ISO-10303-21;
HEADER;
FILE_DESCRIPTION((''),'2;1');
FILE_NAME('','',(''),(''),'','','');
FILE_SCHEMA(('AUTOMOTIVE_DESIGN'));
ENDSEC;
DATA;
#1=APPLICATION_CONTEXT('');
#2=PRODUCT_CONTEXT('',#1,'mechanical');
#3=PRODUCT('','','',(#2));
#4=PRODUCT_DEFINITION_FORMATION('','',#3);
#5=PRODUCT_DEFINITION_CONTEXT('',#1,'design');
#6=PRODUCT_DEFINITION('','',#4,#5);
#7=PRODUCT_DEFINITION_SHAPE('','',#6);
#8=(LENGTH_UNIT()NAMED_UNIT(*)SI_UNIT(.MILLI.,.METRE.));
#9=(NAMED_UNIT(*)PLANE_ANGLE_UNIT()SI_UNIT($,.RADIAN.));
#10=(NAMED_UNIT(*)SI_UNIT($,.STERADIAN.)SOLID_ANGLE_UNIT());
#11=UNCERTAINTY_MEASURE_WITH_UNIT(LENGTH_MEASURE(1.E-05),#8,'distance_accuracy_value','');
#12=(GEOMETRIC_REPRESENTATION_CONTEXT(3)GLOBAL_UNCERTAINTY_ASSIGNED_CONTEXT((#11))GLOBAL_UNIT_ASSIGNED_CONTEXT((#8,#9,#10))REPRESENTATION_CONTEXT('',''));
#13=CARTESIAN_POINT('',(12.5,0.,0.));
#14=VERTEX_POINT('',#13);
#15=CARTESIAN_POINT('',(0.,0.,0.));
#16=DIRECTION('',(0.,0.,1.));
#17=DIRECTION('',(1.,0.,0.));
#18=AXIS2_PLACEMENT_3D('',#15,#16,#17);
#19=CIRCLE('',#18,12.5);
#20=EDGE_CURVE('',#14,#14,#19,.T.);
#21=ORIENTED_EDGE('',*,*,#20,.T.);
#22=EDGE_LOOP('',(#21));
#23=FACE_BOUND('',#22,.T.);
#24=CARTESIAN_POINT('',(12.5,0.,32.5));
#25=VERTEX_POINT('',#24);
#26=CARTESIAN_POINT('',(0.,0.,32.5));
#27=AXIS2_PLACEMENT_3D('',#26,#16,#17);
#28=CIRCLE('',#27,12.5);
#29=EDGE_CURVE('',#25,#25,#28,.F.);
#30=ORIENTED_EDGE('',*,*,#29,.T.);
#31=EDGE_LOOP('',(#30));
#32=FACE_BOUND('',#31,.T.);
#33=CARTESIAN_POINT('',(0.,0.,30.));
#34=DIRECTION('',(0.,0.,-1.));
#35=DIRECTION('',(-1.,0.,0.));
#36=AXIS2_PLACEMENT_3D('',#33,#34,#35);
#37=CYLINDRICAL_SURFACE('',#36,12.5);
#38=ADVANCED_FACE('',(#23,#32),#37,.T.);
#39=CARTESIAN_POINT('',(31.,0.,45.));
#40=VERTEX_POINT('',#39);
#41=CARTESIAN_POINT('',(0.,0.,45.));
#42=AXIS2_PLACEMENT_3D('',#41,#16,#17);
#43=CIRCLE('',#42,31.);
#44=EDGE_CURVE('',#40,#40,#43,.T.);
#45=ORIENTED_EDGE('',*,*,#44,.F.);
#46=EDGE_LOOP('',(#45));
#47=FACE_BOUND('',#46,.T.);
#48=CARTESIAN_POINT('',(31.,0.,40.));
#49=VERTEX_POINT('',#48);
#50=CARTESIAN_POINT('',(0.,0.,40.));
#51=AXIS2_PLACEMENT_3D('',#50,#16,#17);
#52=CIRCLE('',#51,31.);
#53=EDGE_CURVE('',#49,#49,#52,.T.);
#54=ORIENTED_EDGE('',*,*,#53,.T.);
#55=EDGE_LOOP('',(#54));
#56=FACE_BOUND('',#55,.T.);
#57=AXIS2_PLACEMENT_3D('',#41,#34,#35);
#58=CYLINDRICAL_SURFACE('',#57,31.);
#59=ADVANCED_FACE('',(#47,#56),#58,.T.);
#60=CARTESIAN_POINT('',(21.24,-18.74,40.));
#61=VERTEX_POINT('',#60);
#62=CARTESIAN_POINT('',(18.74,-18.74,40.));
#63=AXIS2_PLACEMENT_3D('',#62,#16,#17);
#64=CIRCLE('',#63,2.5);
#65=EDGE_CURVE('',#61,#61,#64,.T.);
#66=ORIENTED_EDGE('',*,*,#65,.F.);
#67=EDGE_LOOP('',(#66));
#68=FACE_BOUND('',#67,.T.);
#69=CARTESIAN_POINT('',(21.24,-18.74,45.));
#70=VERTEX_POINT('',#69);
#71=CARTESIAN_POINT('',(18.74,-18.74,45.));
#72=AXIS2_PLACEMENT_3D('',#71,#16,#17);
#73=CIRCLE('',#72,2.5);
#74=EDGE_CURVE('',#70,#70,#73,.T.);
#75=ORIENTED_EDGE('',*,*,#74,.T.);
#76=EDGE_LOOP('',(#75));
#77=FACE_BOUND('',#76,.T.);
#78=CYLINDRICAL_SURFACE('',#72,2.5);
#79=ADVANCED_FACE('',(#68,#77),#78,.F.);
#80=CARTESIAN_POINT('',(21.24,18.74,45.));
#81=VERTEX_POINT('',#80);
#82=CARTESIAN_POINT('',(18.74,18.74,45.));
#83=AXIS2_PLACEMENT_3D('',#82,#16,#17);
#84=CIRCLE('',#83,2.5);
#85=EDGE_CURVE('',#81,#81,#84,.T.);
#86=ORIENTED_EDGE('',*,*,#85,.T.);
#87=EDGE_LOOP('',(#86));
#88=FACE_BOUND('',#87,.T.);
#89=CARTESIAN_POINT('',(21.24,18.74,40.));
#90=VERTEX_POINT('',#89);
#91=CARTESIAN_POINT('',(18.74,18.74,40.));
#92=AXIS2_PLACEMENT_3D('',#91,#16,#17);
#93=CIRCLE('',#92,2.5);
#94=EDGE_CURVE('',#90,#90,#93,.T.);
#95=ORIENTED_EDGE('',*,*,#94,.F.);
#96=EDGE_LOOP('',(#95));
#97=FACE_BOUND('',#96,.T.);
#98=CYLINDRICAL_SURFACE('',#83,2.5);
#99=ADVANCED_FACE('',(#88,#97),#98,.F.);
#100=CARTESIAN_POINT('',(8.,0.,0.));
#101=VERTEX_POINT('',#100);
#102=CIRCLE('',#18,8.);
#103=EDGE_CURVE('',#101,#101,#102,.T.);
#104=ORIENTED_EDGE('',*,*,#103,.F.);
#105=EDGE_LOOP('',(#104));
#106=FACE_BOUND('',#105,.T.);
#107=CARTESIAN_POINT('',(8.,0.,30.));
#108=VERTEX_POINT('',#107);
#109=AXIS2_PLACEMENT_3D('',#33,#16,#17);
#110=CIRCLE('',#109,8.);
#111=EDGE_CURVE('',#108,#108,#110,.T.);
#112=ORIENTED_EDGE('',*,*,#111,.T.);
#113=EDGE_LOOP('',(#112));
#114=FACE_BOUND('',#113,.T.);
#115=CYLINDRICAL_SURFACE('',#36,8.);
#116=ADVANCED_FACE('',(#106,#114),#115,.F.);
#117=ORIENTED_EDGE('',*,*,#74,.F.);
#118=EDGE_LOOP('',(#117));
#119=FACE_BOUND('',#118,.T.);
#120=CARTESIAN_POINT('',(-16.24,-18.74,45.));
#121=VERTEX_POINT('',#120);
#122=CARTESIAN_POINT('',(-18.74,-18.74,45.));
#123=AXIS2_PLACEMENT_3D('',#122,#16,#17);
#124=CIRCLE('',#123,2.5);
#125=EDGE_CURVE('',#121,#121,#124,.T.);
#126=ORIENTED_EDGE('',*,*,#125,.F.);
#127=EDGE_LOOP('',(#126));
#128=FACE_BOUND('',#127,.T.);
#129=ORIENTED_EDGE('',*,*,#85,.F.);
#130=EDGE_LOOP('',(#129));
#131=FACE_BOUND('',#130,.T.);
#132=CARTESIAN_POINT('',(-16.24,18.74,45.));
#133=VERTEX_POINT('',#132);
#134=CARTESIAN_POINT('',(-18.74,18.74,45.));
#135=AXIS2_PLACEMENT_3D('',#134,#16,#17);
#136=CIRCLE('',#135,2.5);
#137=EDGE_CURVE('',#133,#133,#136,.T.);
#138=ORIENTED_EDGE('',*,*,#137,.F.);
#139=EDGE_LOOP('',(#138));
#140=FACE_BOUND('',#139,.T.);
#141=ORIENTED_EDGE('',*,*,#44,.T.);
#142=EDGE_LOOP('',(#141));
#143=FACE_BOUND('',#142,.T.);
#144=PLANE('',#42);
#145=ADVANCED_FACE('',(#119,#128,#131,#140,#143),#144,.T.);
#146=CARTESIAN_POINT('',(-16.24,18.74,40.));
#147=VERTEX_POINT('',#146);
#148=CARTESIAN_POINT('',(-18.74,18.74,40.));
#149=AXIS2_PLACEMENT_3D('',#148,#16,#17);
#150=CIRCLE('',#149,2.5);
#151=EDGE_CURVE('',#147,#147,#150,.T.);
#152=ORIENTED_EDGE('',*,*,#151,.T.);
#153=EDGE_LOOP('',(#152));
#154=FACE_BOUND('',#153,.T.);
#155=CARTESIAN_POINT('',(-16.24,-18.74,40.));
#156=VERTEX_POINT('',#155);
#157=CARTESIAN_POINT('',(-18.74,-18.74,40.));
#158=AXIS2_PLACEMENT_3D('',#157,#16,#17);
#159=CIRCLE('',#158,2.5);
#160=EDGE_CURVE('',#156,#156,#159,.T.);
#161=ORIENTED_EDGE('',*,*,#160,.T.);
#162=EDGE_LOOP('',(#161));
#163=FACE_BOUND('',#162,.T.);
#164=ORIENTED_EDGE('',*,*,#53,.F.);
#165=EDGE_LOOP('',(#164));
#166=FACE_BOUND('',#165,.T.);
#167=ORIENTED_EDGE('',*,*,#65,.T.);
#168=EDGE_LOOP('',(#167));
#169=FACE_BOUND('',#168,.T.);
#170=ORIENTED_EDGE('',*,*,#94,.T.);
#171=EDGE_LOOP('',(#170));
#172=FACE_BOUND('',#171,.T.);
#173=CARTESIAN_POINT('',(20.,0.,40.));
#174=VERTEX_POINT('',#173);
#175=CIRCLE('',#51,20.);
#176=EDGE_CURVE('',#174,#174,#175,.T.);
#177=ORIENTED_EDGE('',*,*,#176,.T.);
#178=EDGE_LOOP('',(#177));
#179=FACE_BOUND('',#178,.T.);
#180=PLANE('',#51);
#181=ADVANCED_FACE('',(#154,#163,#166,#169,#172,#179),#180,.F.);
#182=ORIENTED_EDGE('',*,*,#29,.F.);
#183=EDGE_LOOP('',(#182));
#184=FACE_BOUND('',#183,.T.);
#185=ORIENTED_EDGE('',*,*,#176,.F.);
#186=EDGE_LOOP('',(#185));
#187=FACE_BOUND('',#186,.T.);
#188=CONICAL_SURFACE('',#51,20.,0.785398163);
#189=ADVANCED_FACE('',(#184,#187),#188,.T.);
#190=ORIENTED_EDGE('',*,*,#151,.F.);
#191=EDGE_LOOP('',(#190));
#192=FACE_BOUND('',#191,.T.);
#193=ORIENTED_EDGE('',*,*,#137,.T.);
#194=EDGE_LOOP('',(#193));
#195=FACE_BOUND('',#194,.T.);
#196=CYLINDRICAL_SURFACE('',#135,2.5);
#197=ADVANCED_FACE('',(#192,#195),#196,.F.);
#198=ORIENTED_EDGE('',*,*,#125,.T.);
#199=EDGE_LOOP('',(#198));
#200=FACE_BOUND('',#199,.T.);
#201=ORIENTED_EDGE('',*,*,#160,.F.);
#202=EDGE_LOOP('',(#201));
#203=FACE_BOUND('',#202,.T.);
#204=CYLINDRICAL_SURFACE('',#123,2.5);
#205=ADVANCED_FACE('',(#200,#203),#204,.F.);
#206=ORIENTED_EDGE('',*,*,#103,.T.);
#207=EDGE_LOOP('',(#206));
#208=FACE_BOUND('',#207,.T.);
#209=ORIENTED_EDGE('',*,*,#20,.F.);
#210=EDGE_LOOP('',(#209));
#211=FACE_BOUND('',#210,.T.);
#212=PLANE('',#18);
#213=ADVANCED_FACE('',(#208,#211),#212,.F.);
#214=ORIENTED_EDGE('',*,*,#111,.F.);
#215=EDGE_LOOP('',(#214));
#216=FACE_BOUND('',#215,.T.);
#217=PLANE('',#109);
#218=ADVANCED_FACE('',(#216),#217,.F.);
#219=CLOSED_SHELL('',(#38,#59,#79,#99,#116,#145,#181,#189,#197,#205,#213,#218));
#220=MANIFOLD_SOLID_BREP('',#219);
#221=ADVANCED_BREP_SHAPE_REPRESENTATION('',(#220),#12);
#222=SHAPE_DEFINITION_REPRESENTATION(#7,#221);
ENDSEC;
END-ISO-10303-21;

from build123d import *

# Parameters (mm, degrees)
SZKIC1_R                    = 12.5
SZKIC1_R_2                  = 8
DODANIE_WYCI_GNI_CIE1_DEPTH = 30
SZKIC2_R                    = 20
DODANIE_WYCI_GNI_CIE3_DEPTH = 10
SZKIC3_R                    = 31
DODANIE_WYCI_GNI_CIE4_DEPTH = 5
SFAZOWANIE1_SIZE            = 10
OTWORY_USTALAJ_CE_5_0MM1_D  = 5


with BuildPart() as part:
    # Szkic1 → Dodanie-wyciągnięcie1 (new body)
    with BuildSketch(Plane.XY):
        Circle(SZKIC1_R)
        Circle(SZKIC1_R_2, mode=Mode.SUBTRACT)
    extrude(amount=DODANIE_WYCI_GNI_CIE1_DEPTH)

    # Szkic2 → Dodanie-wyciągnięcie3 (add)
    with BuildSketch(Plane.XY.offset(30)):
        Circle(SZKIC2_R)
    extrude(amount=DODANIE_WYCI_GNI_CIE3_DEPTH)

    # Szkic3 → Dodanie-wyciągnięcie4 (add)
    with BuildSketch(Plane.XY.offset(40)):
        Circle(SZKIC3_R)
    extrude(amount=DODANIE_WYCI_GNI_CIE4_DEPTH)

    # Sfazowanie1
    # the kernel refuses this chamfer: 10 mm, written as the material it takes off along each edge
    with BuildSketch(Plane(origin=(0, 0, 30), x_dir=(1, 0, 0), z_dir=(0, -1, 0))) as sfazowanie1_piece_1_section:
        Polygon((20, SFAZOWANIE1_SIZE), (20 - SFAZOWANIE1_SIZE, 0), (20, 0), align=None)
    sfazowanie1_piece_1 = revolve(axis=Axis((0, 0, 30), (0, 0, 1)), mode=Mode.PRIVATE)
    sfazowanie1_piece_1 = split(sfazowanie1_piece_1, bisect_by=Plane(origin=(-16.374530577, 0, 40), z_dir=(0, 0, -1)), keep=Keep.TOP, mode=Mode.PRIVATE)
    sfazowanie1_piece_1 = sfazowanie1_piece_1 - Plane(origin=(0, 0, 36.125469423), x_dir=(1, 0, 0), z_dir=(0, 0, -1)) * Cylinder(12.5, 80, mode=Mode.PRIVATE)
    add(sfazowanie1_piece_1, mode=Mode.SUBTRACT)

    # Otwory ustalające Ø5.0mm1 (through all)
    with Locations(Plane(origin=(-18.74, 18.74, 45), x_dir=(1, 0, 0), z_dir=(0, 0, 1))):
        with Locations((0, 0), (37.48, 0), (37.48, -37.48), (0, -37.48)):
            Hole(OTWORY_USTALAJ_CE_5_0MM1_D / 2)


solid = part.part
